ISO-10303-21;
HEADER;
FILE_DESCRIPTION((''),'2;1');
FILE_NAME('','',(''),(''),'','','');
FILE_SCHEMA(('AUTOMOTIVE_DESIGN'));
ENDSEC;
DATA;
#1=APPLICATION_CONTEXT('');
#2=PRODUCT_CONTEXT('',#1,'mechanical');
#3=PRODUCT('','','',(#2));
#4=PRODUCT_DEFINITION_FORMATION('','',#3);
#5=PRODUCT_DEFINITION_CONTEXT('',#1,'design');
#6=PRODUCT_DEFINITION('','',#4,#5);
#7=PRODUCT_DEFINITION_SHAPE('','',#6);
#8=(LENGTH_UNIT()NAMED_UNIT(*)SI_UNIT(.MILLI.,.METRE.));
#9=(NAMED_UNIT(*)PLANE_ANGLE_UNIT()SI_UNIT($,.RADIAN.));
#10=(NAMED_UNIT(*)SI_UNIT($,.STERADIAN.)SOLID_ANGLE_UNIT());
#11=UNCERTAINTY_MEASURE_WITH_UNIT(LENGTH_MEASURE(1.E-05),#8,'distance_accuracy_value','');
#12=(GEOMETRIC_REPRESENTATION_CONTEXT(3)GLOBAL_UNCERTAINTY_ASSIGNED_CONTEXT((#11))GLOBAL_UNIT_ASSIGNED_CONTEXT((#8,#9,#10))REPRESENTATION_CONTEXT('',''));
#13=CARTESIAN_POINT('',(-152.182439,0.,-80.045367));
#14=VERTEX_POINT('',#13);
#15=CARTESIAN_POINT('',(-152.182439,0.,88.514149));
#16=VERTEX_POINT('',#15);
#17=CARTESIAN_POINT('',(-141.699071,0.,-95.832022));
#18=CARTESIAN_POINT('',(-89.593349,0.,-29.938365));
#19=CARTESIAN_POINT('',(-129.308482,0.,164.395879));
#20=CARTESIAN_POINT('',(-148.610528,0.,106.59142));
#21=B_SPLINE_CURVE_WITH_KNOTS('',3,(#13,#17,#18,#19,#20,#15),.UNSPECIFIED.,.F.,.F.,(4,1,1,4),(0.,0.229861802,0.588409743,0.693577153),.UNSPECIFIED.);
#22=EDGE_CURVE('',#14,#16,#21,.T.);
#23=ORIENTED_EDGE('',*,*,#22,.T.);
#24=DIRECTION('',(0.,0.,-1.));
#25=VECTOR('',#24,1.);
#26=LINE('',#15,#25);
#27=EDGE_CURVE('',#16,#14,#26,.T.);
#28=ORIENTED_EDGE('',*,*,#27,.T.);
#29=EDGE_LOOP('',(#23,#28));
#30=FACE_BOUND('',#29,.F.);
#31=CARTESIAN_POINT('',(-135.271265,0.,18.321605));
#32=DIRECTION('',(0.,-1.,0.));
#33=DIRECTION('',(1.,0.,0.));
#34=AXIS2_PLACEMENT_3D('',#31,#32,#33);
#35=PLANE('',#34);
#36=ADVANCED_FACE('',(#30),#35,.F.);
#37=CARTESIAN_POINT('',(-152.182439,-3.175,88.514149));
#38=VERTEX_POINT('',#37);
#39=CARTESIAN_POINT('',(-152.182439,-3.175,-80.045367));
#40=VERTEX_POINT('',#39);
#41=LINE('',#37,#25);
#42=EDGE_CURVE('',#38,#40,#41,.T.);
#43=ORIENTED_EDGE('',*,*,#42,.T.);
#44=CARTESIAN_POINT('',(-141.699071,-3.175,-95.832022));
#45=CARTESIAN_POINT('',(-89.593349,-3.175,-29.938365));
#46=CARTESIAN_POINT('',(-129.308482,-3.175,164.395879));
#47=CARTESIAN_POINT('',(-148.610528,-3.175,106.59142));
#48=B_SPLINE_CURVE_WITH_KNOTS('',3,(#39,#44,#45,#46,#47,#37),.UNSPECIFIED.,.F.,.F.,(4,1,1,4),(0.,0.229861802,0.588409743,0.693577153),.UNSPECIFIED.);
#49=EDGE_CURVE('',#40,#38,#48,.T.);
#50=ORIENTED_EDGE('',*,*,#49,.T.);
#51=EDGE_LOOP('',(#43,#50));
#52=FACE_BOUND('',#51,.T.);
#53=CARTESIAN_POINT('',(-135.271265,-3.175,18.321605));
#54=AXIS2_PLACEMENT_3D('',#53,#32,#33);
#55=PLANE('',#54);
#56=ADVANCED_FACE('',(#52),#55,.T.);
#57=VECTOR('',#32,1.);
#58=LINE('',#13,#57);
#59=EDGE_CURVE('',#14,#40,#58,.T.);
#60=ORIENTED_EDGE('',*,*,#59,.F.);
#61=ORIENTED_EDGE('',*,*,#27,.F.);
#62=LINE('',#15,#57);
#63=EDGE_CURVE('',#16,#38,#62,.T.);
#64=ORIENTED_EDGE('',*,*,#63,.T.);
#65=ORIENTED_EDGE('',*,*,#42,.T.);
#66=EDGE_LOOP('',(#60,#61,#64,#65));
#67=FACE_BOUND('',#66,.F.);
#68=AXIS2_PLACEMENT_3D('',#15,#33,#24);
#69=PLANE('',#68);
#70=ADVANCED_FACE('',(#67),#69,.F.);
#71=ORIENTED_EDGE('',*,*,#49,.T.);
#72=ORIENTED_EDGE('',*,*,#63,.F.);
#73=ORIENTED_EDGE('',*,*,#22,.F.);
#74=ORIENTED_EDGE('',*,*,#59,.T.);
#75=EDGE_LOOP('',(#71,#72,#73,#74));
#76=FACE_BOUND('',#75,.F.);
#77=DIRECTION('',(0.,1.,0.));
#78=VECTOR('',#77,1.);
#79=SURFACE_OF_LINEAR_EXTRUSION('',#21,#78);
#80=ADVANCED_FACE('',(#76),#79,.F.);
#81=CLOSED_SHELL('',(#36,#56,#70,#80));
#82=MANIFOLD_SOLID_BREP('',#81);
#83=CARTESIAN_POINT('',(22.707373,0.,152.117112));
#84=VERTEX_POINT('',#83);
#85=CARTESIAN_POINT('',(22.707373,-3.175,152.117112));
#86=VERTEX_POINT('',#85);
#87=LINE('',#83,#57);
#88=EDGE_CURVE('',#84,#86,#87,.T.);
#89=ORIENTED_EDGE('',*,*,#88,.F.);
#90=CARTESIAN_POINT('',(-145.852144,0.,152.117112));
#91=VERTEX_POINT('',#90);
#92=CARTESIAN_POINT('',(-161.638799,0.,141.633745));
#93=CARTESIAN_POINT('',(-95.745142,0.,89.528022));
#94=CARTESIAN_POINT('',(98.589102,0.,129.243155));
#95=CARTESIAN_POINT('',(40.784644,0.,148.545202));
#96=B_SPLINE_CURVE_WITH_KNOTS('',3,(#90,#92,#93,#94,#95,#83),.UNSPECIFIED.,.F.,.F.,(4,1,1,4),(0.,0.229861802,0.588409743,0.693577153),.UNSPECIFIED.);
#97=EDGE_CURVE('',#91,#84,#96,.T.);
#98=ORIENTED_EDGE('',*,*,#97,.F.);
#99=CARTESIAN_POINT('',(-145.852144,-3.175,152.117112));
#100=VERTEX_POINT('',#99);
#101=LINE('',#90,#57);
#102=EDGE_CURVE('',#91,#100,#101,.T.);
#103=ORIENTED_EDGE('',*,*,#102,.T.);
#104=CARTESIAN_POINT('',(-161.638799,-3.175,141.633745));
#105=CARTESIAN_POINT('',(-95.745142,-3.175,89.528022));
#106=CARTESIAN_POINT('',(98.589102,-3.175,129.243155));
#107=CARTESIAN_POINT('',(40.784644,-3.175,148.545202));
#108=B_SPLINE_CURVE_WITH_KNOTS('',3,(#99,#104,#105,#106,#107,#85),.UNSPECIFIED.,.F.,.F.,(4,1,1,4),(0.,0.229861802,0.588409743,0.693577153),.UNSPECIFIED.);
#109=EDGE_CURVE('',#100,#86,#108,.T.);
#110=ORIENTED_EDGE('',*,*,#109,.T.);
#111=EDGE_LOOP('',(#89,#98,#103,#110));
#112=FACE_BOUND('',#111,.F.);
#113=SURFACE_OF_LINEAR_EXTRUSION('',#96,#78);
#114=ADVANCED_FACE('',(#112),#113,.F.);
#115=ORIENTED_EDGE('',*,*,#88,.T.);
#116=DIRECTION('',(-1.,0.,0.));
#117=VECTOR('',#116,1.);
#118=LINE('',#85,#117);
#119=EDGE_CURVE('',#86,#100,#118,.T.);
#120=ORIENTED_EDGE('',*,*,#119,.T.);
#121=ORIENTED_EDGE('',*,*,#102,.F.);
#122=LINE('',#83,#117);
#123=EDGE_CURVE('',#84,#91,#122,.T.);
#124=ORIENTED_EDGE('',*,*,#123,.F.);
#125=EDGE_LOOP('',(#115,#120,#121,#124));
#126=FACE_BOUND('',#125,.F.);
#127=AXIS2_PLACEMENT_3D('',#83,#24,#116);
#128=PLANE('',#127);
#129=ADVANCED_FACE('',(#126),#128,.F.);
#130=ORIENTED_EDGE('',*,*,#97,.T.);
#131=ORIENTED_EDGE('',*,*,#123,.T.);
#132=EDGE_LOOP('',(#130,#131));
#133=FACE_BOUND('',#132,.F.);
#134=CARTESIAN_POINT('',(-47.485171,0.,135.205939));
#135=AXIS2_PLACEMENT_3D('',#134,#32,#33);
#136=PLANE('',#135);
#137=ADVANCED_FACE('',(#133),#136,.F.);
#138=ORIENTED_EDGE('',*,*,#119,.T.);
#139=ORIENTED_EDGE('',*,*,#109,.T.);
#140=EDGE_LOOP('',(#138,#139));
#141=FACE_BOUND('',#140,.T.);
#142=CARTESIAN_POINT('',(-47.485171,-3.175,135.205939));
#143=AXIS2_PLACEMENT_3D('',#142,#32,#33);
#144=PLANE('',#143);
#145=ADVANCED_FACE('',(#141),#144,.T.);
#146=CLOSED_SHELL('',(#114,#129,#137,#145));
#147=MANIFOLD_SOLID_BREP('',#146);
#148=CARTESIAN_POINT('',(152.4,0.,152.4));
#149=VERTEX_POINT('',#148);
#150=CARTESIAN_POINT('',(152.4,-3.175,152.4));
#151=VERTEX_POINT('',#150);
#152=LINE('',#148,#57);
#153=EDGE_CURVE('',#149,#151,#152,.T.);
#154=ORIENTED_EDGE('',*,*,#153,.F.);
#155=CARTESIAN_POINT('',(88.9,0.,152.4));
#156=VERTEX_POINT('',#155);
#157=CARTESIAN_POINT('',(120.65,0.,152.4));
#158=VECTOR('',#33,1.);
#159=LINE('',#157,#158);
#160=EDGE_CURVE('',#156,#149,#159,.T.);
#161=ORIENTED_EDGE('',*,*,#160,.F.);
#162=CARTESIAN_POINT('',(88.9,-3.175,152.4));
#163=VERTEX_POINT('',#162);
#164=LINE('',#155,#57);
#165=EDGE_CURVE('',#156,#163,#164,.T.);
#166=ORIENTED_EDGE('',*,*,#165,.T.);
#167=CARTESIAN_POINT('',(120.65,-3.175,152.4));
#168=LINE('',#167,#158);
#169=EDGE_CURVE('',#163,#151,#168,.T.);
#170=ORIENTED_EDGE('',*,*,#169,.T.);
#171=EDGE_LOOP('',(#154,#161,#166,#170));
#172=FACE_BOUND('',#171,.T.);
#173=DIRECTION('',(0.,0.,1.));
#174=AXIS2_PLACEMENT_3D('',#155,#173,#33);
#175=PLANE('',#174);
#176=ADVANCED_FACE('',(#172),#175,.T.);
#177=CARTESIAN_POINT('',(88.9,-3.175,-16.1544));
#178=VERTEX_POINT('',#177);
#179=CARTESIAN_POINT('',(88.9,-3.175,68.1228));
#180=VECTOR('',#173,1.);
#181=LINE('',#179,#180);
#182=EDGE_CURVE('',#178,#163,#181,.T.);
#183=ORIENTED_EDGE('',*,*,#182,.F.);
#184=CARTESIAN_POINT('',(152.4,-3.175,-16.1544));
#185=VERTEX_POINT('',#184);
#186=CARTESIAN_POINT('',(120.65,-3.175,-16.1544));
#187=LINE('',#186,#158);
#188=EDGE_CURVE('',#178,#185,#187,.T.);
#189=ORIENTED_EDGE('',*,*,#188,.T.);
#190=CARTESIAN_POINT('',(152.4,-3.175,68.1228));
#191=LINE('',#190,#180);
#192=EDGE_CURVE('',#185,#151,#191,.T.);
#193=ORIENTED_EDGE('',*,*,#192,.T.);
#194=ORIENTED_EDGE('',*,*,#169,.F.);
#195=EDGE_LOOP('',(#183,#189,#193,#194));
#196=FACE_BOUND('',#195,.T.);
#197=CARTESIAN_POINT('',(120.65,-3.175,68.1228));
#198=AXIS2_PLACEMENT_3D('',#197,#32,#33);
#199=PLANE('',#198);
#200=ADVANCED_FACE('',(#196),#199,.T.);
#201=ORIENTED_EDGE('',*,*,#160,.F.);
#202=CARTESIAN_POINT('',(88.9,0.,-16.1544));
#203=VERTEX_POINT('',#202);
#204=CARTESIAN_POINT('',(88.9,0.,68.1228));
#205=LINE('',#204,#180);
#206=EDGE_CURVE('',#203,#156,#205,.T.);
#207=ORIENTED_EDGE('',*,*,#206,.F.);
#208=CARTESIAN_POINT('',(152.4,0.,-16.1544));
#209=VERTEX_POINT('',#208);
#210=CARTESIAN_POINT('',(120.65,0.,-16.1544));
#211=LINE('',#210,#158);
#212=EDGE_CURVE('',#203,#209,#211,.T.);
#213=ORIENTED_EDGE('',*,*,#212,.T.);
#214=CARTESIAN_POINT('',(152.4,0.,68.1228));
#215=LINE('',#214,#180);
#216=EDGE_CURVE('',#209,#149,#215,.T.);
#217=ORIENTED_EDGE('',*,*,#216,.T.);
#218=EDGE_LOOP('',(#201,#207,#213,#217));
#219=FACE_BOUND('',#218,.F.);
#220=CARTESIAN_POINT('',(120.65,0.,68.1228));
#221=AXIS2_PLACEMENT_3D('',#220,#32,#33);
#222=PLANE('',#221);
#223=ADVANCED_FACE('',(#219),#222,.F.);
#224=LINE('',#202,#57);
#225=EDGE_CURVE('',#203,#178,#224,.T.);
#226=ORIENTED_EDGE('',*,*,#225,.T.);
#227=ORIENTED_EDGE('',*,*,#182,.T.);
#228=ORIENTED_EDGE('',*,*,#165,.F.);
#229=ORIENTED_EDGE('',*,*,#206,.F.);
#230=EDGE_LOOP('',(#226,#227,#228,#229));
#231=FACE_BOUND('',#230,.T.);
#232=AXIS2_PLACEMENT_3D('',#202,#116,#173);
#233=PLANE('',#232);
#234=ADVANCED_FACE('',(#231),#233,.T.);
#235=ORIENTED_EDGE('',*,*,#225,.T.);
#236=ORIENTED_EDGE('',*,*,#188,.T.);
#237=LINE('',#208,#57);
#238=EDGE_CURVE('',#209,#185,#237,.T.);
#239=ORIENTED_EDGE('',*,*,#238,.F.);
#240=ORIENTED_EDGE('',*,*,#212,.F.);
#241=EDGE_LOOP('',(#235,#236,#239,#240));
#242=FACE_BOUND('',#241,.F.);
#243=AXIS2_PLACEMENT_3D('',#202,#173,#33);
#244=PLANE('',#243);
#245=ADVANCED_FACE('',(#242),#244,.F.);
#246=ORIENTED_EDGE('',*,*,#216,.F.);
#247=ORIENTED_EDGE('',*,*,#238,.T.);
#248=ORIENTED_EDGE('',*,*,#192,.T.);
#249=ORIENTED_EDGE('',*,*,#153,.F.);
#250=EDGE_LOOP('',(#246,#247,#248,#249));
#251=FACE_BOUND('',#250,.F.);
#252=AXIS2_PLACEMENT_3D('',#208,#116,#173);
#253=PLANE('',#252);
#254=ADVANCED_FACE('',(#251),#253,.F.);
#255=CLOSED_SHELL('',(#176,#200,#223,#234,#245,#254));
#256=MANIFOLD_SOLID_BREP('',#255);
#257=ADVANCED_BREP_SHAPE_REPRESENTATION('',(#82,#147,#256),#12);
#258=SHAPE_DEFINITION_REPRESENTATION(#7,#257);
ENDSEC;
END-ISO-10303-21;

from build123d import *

# Parameters (mm, degrees)
F0_W     = 63.5
F0_H     = 168.5544
F1_DEPTH = 3.175


# Not quite as in the source:
# - a length typed as a fraction of an inch, garbled in the dataset ("3 / 203.2 mm" for 3/8 in), is restored
# - a feature names something its author has since deleted; it is built from what else it names


with BuildPart() as f1:
    # F0 (on Front) → F1 (new body)
    with BuildSketch(Plane.XZ):
        with Locations((120.65, 68.1228)):
            Rectangle(F0_W, F0_H)
    extrude(amount=F1_DEPTH)


with BuildPart() as f1b:
    # F0 (on Front) → F1, piece 2 (new body)
    with BuildSketch(Plane.XZ):
        with BuildLine():
            add(Edge.make_bspline(
                [(-145.852143538, 152.1171118736), (-161.6387986112, 141.6337447271), (-95.7451417453, 89.5280224527), (98.5891023928, 129.2431554146), (40.7846440978, 148.5452015878), (22.7073728104, 152.1171118736)],
                knots=[0, 0, 0, 0, 0.2298618019, 0.5884097433, 0.6935771532, 0.6935771532, 0.6935771532, 0.6935771532], degree=3))
            Line((22.7073728104, 152.1171118736), (-145.852143538, 152.1171118736))
        make_face()
    extrude(amount=F1_DEPTH)


with BuildPart() as f1c:
    # F0 (on Front) → F1, piece 3 (new body)
    with BuildSketch(Plane.XZ):
        with BuildLine():
            Line((-152.1824385643, 88.5141490955), (-152.1824385643, -80.0453672528))
            add(Edge.make_bspline(
                [(-152.1824385643, -80.0453672528), (-141.6990714177, -95.832022326), (-89.5933491434, -29.9383654601), (-129.3084821052, 164.395878678), (-148.6105282784, 106.5914203829), (-152.1824385643, 88.5141490955)],
                knots=[0, 0, 0, 0, 0.2298618019, 0.5884097433, 0.6935771532, 0.6935771532, 0.6935771532, 0.6935771532], degree=3))
        make_face()
    extrude(amount=F1_DEPTH)


solid = Compound([f1.part, f1b.part, f1c.part])
